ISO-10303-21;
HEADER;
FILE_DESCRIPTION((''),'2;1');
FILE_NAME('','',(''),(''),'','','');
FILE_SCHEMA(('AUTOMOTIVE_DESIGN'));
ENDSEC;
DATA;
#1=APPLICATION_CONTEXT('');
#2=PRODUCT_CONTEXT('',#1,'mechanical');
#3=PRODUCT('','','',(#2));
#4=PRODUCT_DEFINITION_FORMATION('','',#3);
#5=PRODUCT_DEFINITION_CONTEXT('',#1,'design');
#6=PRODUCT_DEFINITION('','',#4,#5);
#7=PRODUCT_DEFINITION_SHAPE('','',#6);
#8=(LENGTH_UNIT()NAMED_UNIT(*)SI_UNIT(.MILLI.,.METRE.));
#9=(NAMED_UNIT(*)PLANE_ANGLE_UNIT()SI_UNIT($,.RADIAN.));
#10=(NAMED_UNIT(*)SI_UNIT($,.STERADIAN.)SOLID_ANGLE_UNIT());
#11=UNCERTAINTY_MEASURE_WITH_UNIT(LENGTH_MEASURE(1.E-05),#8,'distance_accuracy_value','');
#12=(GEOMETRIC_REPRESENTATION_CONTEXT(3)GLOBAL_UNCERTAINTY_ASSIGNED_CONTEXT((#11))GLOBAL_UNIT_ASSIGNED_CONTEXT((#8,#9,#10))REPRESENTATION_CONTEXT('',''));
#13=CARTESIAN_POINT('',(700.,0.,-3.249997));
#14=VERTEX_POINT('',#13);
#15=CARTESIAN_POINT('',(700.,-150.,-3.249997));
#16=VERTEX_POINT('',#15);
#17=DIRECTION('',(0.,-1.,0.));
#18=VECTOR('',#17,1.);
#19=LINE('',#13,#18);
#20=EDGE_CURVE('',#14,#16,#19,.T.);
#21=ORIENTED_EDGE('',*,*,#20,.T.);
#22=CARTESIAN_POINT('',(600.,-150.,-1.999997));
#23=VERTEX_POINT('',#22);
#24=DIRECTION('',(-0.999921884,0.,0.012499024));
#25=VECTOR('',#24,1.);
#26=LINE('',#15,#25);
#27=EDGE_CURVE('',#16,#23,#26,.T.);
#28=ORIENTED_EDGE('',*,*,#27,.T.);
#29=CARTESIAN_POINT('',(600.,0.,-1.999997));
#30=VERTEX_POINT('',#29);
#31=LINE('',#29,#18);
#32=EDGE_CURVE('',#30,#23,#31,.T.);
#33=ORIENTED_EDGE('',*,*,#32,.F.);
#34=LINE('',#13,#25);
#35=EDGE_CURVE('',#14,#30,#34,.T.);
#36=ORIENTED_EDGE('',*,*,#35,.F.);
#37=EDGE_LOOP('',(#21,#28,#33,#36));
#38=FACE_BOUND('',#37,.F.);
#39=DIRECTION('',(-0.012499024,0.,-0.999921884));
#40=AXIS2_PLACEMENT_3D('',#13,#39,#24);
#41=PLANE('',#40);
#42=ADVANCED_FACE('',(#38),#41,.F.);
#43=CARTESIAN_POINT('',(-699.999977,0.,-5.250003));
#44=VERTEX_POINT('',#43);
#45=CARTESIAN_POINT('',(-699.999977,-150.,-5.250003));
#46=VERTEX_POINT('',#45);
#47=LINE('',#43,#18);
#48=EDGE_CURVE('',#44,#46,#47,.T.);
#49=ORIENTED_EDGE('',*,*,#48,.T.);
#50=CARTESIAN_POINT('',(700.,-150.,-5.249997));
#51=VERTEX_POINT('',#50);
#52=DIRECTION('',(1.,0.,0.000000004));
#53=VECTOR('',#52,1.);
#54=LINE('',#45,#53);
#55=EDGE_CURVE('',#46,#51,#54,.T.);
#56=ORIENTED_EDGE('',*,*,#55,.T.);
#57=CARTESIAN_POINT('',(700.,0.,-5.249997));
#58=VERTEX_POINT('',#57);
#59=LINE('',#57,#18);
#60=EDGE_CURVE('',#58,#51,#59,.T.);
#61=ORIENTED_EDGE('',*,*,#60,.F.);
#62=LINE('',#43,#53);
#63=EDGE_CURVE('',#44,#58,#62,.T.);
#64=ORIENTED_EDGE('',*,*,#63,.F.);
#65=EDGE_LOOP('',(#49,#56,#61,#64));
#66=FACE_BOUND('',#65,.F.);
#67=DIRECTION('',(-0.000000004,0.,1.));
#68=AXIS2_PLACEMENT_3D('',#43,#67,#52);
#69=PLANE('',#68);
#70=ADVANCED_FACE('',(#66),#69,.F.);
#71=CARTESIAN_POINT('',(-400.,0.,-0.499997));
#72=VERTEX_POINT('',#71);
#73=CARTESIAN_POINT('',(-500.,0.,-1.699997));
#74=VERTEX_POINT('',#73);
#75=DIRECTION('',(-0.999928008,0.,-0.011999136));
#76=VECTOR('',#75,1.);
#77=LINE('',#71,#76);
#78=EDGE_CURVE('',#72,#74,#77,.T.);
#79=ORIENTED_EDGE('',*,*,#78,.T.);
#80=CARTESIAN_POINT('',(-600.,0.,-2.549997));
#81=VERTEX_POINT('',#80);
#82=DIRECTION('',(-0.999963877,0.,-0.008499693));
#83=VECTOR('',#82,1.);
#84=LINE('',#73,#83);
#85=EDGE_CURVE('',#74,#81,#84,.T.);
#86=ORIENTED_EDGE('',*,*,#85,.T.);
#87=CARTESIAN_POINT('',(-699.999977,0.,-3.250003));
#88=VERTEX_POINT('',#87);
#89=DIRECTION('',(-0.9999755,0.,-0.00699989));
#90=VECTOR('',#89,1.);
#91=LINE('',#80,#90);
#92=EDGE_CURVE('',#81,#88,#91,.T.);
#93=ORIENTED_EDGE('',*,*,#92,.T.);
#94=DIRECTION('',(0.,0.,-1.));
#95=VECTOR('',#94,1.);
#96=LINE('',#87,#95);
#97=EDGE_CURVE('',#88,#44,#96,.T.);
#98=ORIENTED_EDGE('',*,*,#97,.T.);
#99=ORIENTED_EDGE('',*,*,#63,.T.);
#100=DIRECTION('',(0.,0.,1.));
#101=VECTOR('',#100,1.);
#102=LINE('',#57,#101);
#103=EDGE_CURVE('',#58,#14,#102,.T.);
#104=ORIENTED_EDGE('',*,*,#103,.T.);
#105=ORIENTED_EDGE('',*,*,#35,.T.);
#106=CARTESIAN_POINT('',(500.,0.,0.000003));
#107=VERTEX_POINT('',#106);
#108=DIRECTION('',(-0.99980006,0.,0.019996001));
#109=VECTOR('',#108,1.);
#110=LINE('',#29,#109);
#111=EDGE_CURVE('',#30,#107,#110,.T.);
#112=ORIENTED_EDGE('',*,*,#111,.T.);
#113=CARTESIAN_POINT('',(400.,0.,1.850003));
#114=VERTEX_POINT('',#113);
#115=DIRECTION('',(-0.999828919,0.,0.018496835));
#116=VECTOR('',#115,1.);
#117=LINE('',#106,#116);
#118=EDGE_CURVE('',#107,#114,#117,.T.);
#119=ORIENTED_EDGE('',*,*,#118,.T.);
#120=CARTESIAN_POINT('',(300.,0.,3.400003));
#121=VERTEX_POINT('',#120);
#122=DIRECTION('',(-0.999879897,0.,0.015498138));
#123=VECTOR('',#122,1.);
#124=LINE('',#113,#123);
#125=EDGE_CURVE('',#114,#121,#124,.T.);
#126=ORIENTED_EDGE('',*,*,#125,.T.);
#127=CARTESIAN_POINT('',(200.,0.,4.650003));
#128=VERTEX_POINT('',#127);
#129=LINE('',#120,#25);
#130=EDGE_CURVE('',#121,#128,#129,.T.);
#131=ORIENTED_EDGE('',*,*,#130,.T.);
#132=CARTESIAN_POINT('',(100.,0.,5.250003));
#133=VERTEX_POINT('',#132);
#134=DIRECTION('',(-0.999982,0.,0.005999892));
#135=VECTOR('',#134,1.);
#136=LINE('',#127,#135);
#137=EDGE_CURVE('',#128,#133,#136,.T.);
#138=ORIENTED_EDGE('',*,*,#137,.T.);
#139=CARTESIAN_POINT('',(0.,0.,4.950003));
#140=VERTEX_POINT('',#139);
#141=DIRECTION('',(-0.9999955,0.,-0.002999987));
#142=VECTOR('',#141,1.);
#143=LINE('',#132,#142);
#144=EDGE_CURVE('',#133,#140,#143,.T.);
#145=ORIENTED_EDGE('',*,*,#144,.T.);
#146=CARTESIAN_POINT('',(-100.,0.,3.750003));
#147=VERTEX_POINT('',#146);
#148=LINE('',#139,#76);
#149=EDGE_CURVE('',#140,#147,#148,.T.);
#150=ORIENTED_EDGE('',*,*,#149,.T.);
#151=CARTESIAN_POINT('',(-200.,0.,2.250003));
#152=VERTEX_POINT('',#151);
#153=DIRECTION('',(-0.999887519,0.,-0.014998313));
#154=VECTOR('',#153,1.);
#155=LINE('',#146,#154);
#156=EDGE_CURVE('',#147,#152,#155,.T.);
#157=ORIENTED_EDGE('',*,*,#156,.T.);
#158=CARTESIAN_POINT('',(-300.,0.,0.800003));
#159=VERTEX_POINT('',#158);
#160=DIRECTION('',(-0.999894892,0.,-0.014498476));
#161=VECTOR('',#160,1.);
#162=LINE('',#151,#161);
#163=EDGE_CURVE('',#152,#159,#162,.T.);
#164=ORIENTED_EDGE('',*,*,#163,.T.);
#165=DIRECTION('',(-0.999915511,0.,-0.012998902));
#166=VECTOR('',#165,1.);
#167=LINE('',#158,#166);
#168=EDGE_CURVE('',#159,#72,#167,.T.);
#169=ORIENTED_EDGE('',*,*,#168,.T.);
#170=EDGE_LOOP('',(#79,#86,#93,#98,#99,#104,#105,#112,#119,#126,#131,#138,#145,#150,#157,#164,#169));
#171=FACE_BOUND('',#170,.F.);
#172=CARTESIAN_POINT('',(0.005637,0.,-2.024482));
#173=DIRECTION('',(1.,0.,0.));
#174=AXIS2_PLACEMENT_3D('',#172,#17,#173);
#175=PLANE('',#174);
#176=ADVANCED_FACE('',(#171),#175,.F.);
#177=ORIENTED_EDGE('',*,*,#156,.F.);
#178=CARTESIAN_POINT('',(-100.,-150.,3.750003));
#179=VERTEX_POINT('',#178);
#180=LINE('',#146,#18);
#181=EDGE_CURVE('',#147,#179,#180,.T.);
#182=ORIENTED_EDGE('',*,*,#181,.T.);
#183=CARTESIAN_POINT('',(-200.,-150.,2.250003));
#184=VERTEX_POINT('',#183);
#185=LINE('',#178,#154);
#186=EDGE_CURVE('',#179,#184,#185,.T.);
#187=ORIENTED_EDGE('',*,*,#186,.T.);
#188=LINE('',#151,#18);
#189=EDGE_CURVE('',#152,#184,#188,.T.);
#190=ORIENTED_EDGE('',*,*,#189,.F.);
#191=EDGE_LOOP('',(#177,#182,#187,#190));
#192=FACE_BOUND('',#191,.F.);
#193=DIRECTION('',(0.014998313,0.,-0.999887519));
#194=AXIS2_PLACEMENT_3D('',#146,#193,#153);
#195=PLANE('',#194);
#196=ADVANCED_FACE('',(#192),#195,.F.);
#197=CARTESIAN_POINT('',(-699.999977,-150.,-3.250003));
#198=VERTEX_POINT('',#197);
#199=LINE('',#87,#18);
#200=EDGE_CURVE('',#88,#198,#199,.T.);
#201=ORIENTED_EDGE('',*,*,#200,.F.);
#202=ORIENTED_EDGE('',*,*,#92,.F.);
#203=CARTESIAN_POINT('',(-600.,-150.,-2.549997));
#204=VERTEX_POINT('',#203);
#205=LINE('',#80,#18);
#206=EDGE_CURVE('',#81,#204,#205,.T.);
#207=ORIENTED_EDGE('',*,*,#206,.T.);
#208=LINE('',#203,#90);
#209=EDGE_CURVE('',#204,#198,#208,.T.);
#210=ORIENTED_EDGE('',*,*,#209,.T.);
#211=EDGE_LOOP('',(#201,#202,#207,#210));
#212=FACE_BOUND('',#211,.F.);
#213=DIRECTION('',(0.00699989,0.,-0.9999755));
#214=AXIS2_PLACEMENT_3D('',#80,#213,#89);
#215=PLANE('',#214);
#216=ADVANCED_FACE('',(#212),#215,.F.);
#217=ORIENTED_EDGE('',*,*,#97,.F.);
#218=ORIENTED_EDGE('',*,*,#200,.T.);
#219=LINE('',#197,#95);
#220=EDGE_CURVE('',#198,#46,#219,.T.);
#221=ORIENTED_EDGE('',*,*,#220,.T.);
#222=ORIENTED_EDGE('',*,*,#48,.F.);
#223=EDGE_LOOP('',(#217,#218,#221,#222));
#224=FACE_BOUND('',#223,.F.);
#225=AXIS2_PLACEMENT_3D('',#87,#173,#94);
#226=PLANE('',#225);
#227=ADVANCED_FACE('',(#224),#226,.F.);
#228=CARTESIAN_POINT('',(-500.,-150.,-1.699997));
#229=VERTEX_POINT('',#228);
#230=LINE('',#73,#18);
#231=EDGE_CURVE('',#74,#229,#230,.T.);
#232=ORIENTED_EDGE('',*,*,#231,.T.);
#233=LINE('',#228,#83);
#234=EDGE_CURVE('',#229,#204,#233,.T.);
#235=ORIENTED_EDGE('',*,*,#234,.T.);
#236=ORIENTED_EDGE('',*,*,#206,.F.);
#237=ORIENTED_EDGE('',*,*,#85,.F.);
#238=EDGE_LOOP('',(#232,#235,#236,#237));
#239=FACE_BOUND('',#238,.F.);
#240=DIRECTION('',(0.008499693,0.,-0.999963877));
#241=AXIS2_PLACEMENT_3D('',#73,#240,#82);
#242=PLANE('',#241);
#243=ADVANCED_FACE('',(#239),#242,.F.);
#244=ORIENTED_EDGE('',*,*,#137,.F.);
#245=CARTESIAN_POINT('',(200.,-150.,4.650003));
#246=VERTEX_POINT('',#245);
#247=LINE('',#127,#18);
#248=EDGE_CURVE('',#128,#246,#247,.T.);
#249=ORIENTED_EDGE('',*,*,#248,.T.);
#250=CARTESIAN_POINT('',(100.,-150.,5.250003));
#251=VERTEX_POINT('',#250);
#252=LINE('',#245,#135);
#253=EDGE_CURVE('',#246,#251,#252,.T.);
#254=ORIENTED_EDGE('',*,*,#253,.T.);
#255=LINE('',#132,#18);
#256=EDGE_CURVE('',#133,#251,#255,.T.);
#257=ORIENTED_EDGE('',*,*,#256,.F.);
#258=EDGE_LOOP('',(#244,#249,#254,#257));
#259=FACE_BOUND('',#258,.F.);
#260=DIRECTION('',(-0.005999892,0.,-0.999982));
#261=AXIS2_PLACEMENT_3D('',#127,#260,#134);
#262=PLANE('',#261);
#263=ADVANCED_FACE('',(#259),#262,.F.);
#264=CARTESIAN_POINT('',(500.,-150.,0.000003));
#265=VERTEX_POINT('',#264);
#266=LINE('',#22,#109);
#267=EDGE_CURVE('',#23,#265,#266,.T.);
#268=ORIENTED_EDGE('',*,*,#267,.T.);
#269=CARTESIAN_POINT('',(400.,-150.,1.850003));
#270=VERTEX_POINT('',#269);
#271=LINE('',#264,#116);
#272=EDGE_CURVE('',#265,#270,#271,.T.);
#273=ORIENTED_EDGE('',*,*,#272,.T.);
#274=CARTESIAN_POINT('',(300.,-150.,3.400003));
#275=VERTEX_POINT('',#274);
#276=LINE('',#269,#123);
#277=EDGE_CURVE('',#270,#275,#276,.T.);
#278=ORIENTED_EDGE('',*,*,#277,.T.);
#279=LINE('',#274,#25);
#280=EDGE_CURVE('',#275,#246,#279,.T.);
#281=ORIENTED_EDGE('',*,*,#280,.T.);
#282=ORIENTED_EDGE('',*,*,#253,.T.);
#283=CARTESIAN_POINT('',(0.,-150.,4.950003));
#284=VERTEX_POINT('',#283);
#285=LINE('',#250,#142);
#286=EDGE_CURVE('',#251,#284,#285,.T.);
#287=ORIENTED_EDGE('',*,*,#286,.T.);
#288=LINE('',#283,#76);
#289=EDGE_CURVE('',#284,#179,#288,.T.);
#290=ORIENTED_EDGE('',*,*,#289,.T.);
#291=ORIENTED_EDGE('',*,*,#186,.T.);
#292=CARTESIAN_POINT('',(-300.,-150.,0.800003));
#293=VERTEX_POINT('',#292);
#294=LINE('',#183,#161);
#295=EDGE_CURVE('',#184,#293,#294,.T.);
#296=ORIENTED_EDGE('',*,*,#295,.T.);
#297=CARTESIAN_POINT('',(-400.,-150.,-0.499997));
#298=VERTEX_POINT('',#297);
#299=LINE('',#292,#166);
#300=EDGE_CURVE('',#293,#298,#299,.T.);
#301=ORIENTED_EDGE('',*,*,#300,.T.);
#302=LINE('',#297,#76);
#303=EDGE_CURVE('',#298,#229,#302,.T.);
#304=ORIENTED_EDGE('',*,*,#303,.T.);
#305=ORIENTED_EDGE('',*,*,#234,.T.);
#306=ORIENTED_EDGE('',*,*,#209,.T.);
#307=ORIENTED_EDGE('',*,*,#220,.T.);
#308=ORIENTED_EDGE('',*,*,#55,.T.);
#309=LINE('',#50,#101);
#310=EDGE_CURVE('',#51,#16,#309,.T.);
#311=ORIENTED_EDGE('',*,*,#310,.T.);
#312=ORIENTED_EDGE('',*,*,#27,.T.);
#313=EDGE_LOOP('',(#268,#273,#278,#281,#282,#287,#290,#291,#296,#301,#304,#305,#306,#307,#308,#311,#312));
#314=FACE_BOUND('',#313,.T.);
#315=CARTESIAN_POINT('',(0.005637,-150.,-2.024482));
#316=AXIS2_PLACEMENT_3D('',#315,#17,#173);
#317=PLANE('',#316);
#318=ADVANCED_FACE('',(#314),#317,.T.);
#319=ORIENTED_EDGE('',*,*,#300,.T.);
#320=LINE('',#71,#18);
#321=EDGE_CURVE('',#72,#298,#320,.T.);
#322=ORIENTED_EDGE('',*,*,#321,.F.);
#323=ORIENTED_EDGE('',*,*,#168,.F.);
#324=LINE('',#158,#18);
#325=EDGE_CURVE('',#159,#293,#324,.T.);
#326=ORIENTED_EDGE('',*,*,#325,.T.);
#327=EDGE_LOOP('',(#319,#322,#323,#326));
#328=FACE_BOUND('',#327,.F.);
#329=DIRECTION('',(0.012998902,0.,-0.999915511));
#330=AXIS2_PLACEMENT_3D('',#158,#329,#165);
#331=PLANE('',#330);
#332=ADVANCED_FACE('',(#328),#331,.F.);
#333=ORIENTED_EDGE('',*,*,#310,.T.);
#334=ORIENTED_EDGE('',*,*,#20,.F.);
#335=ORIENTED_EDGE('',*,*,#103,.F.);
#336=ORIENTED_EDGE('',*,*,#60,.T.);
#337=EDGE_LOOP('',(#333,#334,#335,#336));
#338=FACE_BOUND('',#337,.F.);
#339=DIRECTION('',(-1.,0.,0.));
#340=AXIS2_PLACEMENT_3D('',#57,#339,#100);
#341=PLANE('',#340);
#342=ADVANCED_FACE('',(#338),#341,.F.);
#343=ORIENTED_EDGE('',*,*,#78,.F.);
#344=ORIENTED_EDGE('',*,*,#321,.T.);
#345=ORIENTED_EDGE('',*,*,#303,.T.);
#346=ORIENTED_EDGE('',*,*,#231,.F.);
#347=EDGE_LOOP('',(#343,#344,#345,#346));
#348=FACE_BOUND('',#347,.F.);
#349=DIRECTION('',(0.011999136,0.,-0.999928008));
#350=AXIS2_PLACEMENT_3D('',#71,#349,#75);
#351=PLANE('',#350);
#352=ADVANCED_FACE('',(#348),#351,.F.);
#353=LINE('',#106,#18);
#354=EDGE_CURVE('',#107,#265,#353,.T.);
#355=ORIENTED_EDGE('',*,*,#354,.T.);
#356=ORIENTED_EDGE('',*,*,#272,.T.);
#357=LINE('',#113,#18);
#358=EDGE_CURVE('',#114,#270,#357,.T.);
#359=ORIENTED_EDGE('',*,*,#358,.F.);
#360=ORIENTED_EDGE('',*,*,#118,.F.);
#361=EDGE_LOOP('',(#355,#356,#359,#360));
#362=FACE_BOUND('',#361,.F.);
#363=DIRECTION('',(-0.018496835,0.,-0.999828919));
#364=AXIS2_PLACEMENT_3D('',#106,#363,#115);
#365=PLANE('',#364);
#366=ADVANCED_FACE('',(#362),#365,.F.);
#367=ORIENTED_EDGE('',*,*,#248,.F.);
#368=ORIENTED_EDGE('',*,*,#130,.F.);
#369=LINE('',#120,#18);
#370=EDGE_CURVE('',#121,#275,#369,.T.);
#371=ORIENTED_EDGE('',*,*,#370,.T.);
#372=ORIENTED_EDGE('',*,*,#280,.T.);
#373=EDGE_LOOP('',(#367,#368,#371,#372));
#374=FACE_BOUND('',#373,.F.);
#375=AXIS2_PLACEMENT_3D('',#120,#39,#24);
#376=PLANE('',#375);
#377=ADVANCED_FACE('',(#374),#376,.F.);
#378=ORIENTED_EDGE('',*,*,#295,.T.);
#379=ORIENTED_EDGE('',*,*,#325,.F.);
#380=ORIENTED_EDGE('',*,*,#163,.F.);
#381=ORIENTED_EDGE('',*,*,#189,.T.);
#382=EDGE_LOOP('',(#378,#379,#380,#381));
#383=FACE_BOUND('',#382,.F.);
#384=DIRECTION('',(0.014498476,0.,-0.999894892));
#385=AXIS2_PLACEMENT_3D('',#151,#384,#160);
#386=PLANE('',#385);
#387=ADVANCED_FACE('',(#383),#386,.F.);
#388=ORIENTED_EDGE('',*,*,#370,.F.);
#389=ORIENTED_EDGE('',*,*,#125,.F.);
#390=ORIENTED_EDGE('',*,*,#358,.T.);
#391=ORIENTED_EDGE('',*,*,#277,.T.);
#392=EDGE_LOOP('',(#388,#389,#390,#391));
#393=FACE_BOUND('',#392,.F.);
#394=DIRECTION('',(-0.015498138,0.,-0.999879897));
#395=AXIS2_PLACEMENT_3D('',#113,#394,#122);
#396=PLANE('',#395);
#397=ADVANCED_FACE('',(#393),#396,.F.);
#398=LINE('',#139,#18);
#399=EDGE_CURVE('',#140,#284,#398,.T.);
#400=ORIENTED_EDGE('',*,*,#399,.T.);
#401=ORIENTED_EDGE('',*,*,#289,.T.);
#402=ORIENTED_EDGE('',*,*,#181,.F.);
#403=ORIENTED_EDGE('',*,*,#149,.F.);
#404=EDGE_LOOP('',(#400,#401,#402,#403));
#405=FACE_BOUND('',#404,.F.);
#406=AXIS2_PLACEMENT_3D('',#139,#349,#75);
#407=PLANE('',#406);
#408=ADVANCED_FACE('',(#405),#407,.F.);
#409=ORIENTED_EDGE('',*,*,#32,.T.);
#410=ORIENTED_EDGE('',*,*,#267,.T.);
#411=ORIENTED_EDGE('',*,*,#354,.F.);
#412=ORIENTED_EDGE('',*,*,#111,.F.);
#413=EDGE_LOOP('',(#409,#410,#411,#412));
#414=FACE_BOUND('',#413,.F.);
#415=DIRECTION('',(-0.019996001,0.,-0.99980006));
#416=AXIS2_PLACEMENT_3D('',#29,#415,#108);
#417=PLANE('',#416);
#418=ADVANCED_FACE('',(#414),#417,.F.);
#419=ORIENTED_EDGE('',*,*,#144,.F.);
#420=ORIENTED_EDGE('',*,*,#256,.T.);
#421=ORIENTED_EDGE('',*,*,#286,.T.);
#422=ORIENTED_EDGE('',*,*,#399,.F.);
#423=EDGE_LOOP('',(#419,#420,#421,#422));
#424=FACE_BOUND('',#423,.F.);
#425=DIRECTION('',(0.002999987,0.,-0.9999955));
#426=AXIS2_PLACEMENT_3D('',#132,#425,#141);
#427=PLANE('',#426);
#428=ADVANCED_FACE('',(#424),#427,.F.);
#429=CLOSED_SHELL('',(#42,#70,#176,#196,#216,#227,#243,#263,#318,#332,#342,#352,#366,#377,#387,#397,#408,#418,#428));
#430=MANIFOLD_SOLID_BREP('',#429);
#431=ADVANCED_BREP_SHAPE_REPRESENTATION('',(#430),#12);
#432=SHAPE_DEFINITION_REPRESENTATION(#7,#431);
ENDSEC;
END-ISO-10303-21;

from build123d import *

# Parameters (mm, degrees)
F1_DEPTH = 150


# Not quite as in the source:
# - ends of sketch curves that miss each other by under 0.0002 mm in the source are joined


with BuildPart() as f1:
    # F0 (on Front) → F1 (new body)
    with BuildSketch(Plane.XZ):
        Polygon((-699.999977, -3.250003), (-699.999977, -5.250003), (700, -5.249997), (700, -3.249997), (600, -1.999997), (500, 3e-06), (400, 1.850003), (300, 3.400003), (200, 4.650003), (100, 5.250003), (0, 4.950003), (-100, 3.750003), (-200, 2.250003), (-300, 0.800003), (-400, -0.499997), (-500, -1.699997), (-600, -2.549997), align=None)
    extrude(amount=F1_DEPTH)


solid = f1.part
